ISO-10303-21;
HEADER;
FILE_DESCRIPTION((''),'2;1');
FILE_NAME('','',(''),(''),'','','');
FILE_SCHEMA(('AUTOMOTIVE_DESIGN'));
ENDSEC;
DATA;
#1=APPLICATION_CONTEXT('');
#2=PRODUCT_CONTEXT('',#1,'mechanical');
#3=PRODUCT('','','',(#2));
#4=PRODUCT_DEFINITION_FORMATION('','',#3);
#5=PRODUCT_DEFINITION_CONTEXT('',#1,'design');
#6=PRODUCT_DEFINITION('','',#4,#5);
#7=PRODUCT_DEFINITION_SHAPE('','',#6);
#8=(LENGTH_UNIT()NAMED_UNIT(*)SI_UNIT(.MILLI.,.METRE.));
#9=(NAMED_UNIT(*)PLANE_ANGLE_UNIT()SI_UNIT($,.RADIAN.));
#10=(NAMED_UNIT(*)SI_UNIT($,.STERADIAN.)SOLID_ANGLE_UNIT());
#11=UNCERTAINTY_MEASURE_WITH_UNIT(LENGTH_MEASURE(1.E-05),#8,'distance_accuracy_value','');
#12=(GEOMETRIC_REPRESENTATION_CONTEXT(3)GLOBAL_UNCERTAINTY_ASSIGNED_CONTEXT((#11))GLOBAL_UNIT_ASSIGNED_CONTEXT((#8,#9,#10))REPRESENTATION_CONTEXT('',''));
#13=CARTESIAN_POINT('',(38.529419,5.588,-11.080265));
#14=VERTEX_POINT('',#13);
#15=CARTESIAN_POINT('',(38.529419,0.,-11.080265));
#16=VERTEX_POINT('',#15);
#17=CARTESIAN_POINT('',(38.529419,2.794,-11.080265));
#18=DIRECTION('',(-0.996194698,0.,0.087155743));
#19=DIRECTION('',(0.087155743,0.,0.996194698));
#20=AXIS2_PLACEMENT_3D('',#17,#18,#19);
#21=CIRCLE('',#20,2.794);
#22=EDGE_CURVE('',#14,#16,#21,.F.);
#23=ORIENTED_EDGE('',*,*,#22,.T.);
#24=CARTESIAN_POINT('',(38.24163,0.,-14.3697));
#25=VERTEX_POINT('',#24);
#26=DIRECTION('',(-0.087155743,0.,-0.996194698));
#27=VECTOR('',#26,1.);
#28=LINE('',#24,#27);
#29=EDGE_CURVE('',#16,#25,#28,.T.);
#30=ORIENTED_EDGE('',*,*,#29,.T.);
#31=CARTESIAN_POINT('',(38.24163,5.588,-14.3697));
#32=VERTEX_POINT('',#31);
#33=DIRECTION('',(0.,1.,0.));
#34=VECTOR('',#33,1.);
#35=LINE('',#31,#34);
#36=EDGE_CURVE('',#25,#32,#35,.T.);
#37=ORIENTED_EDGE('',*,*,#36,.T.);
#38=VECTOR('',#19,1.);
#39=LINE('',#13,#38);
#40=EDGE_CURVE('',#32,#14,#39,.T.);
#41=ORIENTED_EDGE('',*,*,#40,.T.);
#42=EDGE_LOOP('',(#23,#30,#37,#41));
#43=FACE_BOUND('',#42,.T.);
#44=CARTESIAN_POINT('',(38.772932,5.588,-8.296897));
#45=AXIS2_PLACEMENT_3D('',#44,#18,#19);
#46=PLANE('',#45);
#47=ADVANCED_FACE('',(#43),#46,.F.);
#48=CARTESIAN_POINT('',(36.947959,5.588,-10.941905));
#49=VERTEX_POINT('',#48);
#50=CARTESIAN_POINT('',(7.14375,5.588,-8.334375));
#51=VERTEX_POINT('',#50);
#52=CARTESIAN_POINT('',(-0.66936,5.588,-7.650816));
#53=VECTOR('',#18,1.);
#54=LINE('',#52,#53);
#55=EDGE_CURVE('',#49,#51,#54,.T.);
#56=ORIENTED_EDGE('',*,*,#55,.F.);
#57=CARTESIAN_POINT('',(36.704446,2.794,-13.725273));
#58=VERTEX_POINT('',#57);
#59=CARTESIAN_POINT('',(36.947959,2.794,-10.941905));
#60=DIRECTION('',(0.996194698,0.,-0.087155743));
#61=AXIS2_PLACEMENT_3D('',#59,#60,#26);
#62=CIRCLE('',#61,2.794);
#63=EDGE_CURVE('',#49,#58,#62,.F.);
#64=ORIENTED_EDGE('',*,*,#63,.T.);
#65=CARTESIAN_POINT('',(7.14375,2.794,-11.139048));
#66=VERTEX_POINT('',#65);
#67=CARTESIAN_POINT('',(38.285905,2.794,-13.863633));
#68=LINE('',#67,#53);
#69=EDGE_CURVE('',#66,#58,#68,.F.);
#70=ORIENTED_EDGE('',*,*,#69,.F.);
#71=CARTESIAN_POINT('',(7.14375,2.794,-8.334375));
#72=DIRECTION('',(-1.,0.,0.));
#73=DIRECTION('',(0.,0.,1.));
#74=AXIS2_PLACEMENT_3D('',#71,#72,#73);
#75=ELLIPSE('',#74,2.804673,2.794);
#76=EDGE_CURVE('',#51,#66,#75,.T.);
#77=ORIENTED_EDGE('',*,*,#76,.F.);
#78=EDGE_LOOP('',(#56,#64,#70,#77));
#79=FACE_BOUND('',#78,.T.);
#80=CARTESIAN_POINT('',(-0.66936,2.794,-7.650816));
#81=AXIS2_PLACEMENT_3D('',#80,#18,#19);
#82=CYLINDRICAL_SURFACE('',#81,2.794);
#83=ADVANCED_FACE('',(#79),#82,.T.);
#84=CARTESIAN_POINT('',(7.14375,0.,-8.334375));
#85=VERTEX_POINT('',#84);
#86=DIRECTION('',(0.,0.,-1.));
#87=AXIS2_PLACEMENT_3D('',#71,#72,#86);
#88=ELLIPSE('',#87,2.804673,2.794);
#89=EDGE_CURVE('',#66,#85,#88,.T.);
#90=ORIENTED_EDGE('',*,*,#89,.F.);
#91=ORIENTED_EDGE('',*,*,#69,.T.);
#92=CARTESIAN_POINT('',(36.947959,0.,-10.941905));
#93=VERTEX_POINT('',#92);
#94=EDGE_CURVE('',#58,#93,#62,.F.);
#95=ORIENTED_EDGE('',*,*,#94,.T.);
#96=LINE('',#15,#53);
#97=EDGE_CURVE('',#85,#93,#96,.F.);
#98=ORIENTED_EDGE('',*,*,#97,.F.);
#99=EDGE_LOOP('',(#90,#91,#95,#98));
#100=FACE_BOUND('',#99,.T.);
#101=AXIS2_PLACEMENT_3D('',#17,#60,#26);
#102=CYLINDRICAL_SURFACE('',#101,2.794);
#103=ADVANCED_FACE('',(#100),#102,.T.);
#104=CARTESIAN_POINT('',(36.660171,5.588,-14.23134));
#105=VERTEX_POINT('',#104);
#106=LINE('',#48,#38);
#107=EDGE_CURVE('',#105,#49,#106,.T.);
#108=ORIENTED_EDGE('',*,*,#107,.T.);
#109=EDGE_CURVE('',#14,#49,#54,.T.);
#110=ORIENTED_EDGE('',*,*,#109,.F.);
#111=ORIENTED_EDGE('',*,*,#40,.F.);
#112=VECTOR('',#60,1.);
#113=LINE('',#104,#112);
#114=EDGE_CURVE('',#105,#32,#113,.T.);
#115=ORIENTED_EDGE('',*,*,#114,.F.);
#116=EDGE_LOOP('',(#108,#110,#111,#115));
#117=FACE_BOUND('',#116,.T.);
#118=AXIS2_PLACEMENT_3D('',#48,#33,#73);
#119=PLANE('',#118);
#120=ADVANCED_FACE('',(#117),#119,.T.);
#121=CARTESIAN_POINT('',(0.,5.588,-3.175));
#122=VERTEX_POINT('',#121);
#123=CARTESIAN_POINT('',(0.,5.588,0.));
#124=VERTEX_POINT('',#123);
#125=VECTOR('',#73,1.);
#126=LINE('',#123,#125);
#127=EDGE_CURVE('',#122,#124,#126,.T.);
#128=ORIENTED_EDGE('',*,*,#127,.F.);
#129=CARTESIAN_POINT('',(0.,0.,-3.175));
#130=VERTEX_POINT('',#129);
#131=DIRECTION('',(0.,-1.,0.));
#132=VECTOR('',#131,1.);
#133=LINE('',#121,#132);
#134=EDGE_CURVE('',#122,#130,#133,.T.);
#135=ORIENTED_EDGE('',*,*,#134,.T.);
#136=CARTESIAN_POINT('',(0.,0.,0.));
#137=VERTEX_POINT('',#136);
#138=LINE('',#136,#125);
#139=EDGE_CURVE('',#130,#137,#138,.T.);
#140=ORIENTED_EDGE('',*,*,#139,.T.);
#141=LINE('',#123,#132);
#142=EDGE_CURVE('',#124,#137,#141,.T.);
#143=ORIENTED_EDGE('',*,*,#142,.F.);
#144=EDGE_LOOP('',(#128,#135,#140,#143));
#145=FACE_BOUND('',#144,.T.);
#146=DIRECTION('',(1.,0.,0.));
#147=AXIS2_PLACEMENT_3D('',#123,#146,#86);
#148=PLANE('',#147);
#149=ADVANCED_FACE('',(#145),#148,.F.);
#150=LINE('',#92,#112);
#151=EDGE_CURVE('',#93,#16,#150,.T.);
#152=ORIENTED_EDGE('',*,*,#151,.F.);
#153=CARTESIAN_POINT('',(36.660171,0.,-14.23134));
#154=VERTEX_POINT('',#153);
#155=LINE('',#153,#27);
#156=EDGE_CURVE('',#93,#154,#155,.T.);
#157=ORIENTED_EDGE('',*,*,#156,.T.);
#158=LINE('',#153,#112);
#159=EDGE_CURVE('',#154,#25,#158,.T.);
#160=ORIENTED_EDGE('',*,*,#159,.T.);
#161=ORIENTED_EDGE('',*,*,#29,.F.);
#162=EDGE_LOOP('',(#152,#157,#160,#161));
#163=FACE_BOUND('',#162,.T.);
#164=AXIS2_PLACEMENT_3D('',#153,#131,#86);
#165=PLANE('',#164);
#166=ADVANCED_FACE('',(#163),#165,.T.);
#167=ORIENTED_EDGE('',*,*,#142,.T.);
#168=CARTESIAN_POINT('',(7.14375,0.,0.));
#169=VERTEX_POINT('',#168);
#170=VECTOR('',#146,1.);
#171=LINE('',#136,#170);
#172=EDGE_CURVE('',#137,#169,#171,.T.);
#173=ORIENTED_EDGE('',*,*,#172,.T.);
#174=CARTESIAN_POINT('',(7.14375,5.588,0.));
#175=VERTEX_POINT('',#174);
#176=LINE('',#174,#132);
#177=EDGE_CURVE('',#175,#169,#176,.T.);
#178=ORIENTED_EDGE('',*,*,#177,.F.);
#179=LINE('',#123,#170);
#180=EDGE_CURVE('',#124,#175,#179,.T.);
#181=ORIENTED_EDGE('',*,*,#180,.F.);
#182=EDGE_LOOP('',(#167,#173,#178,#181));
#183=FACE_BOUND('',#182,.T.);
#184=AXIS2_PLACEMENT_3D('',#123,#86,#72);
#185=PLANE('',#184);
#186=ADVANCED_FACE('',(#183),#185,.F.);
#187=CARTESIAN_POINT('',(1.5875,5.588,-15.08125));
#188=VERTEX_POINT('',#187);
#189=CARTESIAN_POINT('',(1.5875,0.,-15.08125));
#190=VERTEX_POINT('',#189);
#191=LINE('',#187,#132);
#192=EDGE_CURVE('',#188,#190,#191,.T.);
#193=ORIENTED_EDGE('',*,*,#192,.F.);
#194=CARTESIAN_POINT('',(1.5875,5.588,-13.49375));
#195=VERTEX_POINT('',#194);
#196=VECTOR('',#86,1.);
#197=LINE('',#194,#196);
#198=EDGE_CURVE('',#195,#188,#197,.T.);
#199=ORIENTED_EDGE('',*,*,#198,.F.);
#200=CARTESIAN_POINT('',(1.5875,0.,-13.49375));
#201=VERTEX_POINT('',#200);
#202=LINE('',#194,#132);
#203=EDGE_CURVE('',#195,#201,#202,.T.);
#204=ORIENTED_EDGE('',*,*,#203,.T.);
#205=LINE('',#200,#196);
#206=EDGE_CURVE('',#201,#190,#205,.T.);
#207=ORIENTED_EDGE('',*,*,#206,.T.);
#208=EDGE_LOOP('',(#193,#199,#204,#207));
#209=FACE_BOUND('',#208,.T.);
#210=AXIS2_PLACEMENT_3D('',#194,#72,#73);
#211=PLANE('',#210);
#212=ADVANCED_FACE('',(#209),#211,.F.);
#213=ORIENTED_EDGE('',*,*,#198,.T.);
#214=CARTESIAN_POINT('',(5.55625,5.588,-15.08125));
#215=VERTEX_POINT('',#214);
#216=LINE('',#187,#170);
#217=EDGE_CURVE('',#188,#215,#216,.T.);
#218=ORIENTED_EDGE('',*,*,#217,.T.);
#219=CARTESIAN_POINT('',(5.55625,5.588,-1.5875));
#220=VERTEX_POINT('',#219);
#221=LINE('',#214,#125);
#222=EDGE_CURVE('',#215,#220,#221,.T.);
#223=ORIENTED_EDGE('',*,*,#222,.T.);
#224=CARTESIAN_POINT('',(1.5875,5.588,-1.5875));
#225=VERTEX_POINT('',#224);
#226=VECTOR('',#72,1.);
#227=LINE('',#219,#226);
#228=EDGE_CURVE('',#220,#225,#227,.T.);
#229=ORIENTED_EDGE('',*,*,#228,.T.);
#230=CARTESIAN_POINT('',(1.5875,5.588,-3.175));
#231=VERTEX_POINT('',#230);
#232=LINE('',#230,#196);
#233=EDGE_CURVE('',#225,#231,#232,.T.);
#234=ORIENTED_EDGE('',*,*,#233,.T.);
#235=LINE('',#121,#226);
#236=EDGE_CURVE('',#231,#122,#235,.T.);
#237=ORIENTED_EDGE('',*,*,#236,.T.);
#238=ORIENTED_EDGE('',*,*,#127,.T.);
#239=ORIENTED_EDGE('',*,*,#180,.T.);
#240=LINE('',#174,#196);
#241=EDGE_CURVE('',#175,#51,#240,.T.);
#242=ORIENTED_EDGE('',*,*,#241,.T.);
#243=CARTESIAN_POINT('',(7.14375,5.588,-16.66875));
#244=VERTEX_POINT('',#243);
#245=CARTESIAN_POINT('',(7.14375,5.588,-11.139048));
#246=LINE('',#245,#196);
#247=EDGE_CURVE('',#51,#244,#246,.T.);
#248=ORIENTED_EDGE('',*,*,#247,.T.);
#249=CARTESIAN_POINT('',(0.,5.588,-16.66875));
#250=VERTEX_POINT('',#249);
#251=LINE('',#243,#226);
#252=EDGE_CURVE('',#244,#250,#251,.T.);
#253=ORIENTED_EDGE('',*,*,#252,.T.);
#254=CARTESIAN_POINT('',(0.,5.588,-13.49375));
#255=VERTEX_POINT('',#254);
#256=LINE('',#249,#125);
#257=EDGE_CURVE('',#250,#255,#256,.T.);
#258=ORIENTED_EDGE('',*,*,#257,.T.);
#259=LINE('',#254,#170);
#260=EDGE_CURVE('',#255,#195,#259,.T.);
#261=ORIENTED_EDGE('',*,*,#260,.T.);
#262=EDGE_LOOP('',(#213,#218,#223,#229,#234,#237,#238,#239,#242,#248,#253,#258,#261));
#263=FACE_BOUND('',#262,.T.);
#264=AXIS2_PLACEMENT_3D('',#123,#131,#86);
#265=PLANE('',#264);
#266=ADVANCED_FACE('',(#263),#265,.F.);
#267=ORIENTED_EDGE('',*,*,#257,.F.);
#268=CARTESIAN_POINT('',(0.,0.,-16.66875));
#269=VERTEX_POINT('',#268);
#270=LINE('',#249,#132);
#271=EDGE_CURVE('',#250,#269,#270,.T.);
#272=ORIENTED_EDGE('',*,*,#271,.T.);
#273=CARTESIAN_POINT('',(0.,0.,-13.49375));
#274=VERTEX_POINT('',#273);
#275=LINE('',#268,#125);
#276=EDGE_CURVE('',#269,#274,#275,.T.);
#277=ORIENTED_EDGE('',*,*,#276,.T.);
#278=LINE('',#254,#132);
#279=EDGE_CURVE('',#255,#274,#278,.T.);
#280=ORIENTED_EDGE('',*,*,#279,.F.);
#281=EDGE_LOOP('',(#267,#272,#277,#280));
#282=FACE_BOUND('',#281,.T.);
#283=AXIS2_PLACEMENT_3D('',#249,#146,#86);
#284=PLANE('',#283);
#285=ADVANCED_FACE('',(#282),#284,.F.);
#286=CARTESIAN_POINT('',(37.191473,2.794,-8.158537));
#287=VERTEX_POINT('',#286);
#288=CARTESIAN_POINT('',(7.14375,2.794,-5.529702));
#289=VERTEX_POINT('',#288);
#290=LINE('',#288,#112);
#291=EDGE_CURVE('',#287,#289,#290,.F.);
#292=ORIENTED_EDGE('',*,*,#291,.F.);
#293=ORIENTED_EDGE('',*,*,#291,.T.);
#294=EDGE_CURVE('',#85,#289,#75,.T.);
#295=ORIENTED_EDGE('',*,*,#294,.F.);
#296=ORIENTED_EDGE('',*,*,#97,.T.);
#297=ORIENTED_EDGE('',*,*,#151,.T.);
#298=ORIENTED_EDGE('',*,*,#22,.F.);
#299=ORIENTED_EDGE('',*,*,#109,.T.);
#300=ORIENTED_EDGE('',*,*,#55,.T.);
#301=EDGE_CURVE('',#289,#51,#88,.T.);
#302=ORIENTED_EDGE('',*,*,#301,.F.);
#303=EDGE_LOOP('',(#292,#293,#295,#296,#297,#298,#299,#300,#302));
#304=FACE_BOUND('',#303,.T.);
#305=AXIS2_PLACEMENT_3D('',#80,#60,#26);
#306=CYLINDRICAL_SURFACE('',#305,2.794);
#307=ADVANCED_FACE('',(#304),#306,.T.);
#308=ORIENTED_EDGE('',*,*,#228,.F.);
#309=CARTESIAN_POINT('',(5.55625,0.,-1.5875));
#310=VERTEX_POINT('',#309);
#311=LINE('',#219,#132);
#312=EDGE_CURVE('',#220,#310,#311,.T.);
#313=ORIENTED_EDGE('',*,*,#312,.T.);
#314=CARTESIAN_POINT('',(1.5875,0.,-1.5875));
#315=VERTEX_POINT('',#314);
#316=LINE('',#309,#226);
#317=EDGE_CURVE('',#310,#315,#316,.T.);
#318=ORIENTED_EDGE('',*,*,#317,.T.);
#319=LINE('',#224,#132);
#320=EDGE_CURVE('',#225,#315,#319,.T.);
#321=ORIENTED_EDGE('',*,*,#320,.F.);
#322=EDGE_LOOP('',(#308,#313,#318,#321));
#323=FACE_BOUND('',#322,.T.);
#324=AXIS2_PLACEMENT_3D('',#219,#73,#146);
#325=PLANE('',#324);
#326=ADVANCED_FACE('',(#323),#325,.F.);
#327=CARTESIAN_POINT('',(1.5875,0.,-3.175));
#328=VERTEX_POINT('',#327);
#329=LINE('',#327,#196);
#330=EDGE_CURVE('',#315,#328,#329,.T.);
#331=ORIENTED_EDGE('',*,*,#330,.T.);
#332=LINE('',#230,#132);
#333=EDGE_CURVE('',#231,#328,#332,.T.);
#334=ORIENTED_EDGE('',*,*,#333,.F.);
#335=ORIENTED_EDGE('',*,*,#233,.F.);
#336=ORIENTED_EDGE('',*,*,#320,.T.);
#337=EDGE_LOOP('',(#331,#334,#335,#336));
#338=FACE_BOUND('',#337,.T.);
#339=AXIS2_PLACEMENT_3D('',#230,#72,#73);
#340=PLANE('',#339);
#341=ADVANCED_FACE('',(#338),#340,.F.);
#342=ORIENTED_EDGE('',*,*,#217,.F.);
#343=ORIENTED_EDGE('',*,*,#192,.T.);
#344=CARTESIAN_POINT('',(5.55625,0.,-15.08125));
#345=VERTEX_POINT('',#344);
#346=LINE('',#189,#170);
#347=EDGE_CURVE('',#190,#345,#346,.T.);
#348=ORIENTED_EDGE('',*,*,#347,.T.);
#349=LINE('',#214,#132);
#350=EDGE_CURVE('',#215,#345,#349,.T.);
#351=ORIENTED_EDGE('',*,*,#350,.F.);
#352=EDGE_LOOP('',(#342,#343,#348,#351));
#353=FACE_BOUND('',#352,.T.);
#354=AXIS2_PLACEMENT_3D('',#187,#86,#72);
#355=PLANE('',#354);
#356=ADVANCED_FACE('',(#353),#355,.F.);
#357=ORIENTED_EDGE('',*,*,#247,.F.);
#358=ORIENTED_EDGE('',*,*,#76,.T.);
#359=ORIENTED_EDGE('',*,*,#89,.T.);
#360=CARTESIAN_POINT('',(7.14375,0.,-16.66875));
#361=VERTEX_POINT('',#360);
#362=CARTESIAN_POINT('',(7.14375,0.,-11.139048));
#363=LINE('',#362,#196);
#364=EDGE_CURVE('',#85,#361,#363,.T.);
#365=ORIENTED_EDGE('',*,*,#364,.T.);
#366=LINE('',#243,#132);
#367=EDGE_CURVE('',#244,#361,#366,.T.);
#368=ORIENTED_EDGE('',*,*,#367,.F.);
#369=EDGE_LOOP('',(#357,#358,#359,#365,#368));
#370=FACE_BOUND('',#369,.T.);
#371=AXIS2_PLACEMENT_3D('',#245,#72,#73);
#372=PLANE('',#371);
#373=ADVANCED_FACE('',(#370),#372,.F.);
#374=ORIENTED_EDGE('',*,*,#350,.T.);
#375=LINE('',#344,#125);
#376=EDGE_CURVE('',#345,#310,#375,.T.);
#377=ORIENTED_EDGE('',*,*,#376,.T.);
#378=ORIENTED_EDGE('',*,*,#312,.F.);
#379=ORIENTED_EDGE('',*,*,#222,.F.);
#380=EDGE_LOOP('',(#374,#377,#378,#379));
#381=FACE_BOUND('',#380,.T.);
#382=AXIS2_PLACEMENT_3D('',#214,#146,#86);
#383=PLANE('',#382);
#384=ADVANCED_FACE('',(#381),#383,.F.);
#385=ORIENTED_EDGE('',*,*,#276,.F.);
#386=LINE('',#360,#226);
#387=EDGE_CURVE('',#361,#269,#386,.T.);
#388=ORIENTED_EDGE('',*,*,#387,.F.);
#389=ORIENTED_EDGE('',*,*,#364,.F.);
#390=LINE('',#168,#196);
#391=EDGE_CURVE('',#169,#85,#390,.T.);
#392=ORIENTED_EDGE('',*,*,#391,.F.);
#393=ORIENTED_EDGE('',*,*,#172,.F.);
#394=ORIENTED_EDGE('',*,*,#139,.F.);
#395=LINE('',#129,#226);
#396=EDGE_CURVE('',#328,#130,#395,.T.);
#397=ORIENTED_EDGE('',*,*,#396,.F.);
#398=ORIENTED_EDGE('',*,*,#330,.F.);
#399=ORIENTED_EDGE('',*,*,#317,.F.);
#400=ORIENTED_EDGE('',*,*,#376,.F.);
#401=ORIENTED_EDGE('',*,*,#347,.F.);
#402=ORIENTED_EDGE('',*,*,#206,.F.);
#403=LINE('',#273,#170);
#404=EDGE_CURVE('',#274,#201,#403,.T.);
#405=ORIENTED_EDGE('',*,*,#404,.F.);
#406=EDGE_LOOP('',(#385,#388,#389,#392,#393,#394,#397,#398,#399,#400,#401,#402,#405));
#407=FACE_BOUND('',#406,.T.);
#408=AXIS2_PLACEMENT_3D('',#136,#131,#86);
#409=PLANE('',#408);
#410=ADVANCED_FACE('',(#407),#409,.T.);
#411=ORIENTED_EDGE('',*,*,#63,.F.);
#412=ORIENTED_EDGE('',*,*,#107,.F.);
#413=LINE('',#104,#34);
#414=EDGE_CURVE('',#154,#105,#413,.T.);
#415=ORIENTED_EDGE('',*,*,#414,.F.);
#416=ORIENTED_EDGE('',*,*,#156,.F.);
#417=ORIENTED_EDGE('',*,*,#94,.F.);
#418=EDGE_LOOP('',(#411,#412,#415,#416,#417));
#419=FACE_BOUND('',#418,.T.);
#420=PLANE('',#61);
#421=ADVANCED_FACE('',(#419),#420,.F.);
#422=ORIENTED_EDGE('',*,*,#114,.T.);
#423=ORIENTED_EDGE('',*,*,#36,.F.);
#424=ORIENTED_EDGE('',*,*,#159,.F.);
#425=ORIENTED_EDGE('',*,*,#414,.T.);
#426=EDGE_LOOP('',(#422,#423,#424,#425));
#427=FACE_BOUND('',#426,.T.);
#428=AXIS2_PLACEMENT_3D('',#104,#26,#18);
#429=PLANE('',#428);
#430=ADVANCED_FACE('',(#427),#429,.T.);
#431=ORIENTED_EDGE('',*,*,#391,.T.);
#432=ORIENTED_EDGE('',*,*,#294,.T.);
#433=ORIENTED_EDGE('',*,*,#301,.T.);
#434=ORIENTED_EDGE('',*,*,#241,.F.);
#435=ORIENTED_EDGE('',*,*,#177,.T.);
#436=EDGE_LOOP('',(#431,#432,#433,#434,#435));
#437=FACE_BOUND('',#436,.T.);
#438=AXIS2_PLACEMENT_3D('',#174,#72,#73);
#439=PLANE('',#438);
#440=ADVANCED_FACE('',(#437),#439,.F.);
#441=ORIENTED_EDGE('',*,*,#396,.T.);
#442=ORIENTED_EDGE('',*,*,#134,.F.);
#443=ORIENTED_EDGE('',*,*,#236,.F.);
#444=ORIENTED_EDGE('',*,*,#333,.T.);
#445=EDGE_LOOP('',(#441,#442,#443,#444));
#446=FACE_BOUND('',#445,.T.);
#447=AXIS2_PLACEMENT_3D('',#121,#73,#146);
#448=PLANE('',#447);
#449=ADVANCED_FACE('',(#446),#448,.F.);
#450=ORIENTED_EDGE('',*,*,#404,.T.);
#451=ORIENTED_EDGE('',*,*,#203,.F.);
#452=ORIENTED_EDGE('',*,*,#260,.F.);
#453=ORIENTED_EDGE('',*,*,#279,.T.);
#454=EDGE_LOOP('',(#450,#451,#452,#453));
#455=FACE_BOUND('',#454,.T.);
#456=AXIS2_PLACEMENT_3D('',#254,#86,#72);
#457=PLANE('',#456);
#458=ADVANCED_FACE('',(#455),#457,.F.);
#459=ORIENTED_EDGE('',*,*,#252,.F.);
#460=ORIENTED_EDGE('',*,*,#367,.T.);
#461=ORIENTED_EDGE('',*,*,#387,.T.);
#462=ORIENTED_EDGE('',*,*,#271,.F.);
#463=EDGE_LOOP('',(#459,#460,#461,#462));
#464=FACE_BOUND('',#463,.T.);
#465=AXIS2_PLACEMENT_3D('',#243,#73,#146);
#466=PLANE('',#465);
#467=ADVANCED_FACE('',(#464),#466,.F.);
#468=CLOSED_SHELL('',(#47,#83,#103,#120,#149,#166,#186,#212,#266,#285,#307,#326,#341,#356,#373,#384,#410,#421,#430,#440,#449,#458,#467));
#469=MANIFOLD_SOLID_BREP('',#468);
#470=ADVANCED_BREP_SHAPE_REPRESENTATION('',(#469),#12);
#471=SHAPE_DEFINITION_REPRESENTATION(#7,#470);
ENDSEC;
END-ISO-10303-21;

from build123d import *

# Parameters (mm, degrees)
BOSS_EXTRUDE1_DEPTH = 5.588
FILLET1_R           = 2.794
BOSS_EXTRUDE2_DEPTH = 1.5875


with BuildPart() as part:
    # Sketch1 → Boss-Extrude1 (new body)
    with BuildSketch(Plane(origin=(0, 0, 0), x_dir=(1, 0, 0), z_dir=(0, 1, 0))):
        Polygon((0, 0), (7.14375, 0), (7.14375, 5.529702374), (38.772931664, 8.296897206), (38.285905374, 13.863633179), (7.14375, 11.139047626), (7.14375, 16.66875), (0, 16.66875), (0, 13.49375), (1.5875, 13.49375), (1.5875, 15.08125), (5.55625, 15.08125), (5.55625, 1.5875), (1.5875, 1.5875), (1.5875, 3.175), (0, 3.175), align=None)
    extrude(amount=BOSS_EXTRUDE1_DEPTH)

    # Fillet1
    fillet1_edges = [part.edges().sort_by_distance(p)[0] for p in [
        (22.958340832, 0, -6.91329979),
        (22.714827687, 0, -12.501340403),
        (22.958340832, 5.588, -6.91329979),
        (22.714827687, 5.588, -12.501340403),
    ]]
    fillet(fillet1_edges, radius=FILLET1_R - 0.0001)  # a hair under: the kernel refuses the full size

    # Sketch2 → Boss-Extrude2 (add)
    with BuildSketch(Plane(origin=(39.198778227, 0, -3.429448719), x_dir=(-0.08715574274766254, 0, -0.9961946980917452), z_dir=(0.9961946980917452, 0, -0.08715574274766254))):
        with BuildLine():
            Line((7.68004135, 5.588), (10.98204135, 5.588))
            Line((10.98204135, 5.588), (10.98204135, 0))
            Line((10.98204135, 0), (7.68004135, 0))
            ThreePointArc((7.68004135, 0), (4.88604135, 2.794), (7.68004135, 5.588))
        make_face()
    extrude(amount=-BOSS_EXTRUDE2_DEPTH)


solid = part.part
